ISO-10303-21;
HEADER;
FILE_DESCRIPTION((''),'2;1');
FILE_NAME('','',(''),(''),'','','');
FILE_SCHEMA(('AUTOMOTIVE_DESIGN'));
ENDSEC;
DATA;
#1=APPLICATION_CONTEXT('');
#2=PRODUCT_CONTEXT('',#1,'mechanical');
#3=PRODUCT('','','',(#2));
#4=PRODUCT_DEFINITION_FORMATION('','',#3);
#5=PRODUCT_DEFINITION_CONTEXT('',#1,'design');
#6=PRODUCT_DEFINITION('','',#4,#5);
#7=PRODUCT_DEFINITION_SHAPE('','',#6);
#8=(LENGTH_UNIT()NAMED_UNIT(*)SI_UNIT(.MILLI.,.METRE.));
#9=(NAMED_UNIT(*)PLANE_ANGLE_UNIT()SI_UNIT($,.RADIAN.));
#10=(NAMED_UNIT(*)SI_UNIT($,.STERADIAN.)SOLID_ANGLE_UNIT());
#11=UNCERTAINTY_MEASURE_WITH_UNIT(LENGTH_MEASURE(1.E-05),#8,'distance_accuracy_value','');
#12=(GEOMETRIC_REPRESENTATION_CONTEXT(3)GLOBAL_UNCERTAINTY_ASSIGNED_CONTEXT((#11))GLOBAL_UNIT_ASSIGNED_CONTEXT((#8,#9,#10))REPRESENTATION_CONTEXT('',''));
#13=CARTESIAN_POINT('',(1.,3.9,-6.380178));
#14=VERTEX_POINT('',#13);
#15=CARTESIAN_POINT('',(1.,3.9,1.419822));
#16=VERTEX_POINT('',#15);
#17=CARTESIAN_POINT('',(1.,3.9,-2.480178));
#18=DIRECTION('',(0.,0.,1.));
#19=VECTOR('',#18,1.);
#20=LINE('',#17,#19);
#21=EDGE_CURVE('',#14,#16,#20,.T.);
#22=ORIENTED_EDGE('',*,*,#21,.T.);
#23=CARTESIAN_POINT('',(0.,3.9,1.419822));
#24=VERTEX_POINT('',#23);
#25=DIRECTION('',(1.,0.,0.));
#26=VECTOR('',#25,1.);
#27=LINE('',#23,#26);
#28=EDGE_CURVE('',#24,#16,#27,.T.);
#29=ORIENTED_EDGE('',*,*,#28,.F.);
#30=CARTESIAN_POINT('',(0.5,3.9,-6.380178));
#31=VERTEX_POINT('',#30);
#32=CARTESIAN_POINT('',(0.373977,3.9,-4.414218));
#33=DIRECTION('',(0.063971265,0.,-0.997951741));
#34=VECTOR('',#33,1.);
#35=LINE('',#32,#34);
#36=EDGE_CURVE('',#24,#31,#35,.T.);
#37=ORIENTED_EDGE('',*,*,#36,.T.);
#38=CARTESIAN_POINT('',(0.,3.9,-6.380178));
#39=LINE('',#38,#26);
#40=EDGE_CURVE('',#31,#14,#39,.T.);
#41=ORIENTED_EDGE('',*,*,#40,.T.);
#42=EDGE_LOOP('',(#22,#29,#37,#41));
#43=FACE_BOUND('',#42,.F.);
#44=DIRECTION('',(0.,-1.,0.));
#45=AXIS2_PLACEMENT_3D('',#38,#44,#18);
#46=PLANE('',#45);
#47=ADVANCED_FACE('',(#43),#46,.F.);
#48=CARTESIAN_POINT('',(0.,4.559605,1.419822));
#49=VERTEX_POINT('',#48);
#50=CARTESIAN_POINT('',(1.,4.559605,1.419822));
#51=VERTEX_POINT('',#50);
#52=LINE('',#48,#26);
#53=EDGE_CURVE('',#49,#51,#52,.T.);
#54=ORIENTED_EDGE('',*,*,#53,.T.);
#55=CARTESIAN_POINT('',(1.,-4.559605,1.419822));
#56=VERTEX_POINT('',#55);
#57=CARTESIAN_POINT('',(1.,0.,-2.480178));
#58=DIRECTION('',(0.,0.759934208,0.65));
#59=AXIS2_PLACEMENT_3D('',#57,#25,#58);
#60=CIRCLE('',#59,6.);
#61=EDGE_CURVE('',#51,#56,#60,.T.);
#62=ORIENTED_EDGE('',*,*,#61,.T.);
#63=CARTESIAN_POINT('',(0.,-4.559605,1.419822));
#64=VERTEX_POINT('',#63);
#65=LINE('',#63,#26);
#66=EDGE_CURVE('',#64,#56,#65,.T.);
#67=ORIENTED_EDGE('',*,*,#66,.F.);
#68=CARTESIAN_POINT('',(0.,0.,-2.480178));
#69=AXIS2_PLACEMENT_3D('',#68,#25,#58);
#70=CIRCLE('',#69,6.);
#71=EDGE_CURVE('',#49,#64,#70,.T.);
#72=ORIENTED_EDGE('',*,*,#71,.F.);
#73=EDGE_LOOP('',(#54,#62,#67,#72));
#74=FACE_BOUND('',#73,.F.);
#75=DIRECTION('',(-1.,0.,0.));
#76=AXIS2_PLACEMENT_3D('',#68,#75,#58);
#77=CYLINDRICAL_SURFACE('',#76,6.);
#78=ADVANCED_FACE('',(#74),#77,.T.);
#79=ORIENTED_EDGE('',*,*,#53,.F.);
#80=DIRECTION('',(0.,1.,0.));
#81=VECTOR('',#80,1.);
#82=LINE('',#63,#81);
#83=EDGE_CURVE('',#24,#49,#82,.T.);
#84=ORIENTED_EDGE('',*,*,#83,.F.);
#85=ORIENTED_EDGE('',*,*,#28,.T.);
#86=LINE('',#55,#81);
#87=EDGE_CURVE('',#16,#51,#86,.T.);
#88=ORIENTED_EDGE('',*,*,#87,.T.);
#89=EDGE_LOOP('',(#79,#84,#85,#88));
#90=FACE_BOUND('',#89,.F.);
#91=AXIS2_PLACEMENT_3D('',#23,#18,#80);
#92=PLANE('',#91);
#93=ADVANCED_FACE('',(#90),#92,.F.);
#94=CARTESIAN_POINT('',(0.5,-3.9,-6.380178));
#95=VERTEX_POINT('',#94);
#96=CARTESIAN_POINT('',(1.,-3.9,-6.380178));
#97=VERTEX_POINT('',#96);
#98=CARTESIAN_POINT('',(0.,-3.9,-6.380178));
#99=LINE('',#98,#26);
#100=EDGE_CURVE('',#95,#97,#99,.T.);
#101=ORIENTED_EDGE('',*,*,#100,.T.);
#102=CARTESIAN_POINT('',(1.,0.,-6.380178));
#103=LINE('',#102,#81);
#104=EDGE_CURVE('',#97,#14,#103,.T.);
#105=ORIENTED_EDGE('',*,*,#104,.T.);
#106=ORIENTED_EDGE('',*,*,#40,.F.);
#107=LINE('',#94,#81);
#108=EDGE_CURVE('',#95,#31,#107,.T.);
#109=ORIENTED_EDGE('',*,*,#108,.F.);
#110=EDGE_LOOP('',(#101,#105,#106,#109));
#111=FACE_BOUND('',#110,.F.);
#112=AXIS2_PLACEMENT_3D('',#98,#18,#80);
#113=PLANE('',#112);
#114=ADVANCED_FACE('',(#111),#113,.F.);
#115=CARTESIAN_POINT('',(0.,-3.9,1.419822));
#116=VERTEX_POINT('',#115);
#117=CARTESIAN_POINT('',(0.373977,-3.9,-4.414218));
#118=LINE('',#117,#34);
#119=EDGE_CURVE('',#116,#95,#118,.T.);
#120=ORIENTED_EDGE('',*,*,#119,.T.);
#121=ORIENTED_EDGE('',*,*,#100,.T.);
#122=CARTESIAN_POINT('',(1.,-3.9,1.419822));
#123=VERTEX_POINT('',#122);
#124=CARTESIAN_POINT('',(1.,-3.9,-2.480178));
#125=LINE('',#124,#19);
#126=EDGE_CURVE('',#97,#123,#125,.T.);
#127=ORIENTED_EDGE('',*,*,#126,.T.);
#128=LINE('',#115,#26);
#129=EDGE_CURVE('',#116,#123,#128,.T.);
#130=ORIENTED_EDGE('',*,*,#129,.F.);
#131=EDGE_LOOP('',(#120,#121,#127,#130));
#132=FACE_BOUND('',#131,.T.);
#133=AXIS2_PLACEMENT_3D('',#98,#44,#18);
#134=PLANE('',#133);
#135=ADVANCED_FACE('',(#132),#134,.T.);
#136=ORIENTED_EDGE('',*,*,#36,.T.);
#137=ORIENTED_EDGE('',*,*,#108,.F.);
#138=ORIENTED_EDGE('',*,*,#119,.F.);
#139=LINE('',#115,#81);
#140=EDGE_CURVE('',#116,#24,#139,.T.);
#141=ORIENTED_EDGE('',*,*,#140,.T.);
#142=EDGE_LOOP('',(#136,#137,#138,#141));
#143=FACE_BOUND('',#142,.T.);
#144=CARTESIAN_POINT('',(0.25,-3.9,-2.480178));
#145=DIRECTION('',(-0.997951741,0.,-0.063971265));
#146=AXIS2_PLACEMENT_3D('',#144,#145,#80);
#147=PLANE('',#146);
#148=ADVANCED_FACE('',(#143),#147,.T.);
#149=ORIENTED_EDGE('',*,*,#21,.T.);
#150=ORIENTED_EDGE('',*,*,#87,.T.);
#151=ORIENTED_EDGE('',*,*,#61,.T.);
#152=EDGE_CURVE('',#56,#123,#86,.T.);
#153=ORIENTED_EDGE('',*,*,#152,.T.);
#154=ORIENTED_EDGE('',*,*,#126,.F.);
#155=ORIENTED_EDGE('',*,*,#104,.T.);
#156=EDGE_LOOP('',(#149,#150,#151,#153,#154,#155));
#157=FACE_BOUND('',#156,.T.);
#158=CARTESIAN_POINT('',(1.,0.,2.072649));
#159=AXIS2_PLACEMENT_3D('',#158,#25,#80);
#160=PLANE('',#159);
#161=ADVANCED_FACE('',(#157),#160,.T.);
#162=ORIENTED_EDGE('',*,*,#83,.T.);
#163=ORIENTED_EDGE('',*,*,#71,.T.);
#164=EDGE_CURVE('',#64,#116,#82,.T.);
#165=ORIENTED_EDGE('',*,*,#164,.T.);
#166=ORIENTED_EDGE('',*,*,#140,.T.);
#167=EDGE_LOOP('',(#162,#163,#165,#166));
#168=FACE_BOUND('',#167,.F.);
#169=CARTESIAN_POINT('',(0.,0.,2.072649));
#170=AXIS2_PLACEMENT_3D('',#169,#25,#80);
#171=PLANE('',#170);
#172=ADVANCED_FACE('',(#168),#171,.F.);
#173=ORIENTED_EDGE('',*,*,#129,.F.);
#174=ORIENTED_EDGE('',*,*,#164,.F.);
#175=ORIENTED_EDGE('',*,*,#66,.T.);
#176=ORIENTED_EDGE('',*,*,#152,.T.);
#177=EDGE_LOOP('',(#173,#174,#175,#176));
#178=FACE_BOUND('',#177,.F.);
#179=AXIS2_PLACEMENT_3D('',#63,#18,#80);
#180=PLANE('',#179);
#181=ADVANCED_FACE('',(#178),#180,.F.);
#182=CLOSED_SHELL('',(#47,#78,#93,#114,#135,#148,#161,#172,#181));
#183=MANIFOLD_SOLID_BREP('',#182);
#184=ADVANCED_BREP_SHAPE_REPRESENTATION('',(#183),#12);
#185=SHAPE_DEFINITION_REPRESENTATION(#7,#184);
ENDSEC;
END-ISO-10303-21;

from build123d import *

# Parameters (mm, degrees)
F0_W     = 7.8
F0_H     = 7.8
F1_DEPTH = 1
F2_SIZE2 = 0.5
F2_SIZE  = 7.8


# Not quite as in the source:
# - a feature names something its author has since deleted; it is built from what else it names


with BuildPart() as f1:
    # F0 (on Right) → F1 (new body)
    with BuildSketch(Plane.YZ):
        with BuildLine():
            Line((-3.9, 1.419822283), (3.9, 1.419822283))
            Line((3.9, 1.419822283), (4.5596052461, 1.419822283))
            ThreePointArc((4.5596052461, 1.419822283), (0, 3.519822283), (-4.5596052461, 1.419822283))
            Line((-4.5596052461, 1.419822283), (-3.9, 1.419822283))
        make_face()
        with Locations((0, -2.480177717)):
            Rectangle(F0_W, F0_H)
    extrude(amount=F1_DEPTH)

    # F2
    f2_edges = [f1.edges().sort_by_distance(p)[0] for p in [
        (0, 0, -6.380178),
    ]]
    f2_side = f1.faces().sort_by_distance((0, 0, -1.62771))[0]
    chamfer(f2_edges, length=F2_SIZE, length2=F2_SIZE2, reference=f2_side)


solid = f1.part
